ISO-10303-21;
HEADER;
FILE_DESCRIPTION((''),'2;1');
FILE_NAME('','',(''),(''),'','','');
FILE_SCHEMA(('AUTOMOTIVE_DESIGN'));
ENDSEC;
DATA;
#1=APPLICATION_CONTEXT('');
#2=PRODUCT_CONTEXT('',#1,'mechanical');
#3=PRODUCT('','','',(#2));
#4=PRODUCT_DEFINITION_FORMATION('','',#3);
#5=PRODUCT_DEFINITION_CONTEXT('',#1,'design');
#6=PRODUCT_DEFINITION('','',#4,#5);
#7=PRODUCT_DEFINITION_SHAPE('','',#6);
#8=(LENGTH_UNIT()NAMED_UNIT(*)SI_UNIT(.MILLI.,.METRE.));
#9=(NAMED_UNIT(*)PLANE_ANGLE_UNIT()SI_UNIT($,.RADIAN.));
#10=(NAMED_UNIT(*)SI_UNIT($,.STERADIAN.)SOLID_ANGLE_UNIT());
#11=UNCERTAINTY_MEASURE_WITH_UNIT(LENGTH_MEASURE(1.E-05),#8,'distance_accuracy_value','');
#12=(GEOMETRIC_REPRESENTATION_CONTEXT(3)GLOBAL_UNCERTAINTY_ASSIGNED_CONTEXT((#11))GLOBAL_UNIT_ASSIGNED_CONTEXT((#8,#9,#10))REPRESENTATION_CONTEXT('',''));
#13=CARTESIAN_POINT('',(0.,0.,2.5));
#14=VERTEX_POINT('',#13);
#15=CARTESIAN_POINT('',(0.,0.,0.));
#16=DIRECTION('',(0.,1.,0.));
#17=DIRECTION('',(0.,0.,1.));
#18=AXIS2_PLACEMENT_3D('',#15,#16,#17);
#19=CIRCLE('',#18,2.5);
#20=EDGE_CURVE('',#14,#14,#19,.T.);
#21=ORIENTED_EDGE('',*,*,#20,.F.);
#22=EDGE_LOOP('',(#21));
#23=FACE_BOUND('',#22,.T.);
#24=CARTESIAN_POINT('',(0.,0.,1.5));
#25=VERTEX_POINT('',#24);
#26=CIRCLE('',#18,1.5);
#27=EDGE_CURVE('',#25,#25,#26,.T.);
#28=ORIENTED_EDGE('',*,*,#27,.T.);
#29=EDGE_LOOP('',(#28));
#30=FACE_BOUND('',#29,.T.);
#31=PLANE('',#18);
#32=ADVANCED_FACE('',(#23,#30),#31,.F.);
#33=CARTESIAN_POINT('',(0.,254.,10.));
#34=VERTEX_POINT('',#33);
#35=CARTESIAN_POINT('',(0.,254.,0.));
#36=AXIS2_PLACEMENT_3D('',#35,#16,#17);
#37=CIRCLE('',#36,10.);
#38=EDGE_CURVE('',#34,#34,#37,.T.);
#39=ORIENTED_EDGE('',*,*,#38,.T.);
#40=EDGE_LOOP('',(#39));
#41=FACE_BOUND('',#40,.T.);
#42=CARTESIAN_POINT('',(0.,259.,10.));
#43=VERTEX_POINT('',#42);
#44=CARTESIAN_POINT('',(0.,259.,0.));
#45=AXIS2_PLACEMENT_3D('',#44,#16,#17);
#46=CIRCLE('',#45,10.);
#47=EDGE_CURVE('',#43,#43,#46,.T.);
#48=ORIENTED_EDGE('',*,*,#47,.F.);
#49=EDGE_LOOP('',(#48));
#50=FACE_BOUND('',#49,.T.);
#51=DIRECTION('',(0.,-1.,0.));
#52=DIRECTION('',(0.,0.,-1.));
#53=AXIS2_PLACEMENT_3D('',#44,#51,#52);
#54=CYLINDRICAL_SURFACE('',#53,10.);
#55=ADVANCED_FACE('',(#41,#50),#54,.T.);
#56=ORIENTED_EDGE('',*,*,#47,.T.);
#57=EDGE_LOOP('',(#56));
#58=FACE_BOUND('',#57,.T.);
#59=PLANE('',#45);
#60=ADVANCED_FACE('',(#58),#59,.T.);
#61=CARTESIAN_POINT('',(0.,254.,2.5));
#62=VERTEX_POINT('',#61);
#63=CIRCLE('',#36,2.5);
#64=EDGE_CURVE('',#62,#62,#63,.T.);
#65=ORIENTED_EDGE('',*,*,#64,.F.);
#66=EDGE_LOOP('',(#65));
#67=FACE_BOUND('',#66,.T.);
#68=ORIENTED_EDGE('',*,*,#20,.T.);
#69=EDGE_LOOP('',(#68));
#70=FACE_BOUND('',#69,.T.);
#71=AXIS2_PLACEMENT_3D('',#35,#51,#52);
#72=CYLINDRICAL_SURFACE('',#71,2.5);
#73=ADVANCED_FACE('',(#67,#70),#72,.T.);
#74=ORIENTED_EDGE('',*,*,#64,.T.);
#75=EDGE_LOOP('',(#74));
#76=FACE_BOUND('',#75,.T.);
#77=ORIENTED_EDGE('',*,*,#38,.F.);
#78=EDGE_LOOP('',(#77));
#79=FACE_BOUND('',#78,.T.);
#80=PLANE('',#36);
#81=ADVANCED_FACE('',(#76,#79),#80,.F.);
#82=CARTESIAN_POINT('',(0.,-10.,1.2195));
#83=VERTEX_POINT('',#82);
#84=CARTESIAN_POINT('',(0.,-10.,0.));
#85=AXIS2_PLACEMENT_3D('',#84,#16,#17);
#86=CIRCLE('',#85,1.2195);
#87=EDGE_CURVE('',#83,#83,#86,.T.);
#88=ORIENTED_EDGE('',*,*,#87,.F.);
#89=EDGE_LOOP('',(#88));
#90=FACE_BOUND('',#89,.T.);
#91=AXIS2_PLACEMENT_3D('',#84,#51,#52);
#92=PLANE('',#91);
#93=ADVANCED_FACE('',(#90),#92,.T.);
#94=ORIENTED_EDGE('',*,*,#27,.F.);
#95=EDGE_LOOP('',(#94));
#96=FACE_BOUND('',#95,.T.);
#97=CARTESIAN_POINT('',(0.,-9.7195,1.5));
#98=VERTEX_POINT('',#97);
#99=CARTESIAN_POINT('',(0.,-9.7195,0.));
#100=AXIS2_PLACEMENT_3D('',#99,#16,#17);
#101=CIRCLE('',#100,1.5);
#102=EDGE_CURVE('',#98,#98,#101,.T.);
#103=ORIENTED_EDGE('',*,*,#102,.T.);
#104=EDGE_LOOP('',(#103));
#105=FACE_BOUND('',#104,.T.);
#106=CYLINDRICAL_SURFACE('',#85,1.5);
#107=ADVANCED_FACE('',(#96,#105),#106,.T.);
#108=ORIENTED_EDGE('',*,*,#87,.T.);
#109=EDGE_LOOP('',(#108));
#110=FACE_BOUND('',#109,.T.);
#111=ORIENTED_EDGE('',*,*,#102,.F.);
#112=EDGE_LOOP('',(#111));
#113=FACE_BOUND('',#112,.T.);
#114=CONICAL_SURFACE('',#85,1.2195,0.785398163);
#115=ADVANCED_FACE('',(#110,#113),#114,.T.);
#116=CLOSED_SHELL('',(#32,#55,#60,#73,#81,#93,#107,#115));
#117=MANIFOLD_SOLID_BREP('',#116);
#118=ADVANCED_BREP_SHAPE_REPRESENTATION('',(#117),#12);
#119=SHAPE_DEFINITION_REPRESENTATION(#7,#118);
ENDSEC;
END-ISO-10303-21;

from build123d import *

# Parameters (mm, degrees)
SKETCH1_R           = 2.5
BOSS_EXTRUDE1_DEPTH = 254
SKETCH2_R           = 2
BOSS_EXTRUDE2_DEPTH = 10
SKETCH4_R           = 10
BOSS_EXTRUDE3_DEPTH = 5


# Read off the part's stored shape, not the designer's step: M3 Machine Threads Stud1
with BuildPart() as part:
    # Sketch1 → Boss-Extrude1 (new body)
    with BuildSketch(Plane(origin=(0, 0, 0), x_dir=(1, 0, 0), z_dir=(0, 1, 0))):
        with Locations(Location((0, 0, 0), (0, 0, 270))):
            Circle(SKETCH1_R)
    extrude(amount=BOSS_EXTRUDE1_DEPTH)

    # Sketch2 → Boss-Extrude2 (add)
    with BuildSketch(Plane.XZ):
        with Locations(Location((0, 0, 0), (0, 0, 270))):
            Circle(SKETCH2_R)
    extrude(amount=BOSS_EXTRUDE2_DEPTH)

    # M3 Machine Threads Stud1 outline → M3 Machine Threads Stud1 (revolve, cut)
    with BuildSketch(Plane.XY):
        Polygon((2, 0), (1.5, 0), (1.5, -9.7195), (1.2195, -10), (2, -10), align=None)
    revolve(axis=Axis((0, 0, 0), (0, 1, 0)), mode=Mode.SUBTRACT)

    # Sketch4 → Boss-Extrude3 (add)
    with BuildSketch(Plane(origin=(0, 254, 0), x_dir=(1, 0, 0), z_dir=(0, 1, 0))):
        with Locations(Location((0, 0, 0), (0, 0, 270))):
            Circle(SKETCH4_R)
    extrude(amount=BOSS_EXTRUDE3_DEPTH)


solid = part.part
